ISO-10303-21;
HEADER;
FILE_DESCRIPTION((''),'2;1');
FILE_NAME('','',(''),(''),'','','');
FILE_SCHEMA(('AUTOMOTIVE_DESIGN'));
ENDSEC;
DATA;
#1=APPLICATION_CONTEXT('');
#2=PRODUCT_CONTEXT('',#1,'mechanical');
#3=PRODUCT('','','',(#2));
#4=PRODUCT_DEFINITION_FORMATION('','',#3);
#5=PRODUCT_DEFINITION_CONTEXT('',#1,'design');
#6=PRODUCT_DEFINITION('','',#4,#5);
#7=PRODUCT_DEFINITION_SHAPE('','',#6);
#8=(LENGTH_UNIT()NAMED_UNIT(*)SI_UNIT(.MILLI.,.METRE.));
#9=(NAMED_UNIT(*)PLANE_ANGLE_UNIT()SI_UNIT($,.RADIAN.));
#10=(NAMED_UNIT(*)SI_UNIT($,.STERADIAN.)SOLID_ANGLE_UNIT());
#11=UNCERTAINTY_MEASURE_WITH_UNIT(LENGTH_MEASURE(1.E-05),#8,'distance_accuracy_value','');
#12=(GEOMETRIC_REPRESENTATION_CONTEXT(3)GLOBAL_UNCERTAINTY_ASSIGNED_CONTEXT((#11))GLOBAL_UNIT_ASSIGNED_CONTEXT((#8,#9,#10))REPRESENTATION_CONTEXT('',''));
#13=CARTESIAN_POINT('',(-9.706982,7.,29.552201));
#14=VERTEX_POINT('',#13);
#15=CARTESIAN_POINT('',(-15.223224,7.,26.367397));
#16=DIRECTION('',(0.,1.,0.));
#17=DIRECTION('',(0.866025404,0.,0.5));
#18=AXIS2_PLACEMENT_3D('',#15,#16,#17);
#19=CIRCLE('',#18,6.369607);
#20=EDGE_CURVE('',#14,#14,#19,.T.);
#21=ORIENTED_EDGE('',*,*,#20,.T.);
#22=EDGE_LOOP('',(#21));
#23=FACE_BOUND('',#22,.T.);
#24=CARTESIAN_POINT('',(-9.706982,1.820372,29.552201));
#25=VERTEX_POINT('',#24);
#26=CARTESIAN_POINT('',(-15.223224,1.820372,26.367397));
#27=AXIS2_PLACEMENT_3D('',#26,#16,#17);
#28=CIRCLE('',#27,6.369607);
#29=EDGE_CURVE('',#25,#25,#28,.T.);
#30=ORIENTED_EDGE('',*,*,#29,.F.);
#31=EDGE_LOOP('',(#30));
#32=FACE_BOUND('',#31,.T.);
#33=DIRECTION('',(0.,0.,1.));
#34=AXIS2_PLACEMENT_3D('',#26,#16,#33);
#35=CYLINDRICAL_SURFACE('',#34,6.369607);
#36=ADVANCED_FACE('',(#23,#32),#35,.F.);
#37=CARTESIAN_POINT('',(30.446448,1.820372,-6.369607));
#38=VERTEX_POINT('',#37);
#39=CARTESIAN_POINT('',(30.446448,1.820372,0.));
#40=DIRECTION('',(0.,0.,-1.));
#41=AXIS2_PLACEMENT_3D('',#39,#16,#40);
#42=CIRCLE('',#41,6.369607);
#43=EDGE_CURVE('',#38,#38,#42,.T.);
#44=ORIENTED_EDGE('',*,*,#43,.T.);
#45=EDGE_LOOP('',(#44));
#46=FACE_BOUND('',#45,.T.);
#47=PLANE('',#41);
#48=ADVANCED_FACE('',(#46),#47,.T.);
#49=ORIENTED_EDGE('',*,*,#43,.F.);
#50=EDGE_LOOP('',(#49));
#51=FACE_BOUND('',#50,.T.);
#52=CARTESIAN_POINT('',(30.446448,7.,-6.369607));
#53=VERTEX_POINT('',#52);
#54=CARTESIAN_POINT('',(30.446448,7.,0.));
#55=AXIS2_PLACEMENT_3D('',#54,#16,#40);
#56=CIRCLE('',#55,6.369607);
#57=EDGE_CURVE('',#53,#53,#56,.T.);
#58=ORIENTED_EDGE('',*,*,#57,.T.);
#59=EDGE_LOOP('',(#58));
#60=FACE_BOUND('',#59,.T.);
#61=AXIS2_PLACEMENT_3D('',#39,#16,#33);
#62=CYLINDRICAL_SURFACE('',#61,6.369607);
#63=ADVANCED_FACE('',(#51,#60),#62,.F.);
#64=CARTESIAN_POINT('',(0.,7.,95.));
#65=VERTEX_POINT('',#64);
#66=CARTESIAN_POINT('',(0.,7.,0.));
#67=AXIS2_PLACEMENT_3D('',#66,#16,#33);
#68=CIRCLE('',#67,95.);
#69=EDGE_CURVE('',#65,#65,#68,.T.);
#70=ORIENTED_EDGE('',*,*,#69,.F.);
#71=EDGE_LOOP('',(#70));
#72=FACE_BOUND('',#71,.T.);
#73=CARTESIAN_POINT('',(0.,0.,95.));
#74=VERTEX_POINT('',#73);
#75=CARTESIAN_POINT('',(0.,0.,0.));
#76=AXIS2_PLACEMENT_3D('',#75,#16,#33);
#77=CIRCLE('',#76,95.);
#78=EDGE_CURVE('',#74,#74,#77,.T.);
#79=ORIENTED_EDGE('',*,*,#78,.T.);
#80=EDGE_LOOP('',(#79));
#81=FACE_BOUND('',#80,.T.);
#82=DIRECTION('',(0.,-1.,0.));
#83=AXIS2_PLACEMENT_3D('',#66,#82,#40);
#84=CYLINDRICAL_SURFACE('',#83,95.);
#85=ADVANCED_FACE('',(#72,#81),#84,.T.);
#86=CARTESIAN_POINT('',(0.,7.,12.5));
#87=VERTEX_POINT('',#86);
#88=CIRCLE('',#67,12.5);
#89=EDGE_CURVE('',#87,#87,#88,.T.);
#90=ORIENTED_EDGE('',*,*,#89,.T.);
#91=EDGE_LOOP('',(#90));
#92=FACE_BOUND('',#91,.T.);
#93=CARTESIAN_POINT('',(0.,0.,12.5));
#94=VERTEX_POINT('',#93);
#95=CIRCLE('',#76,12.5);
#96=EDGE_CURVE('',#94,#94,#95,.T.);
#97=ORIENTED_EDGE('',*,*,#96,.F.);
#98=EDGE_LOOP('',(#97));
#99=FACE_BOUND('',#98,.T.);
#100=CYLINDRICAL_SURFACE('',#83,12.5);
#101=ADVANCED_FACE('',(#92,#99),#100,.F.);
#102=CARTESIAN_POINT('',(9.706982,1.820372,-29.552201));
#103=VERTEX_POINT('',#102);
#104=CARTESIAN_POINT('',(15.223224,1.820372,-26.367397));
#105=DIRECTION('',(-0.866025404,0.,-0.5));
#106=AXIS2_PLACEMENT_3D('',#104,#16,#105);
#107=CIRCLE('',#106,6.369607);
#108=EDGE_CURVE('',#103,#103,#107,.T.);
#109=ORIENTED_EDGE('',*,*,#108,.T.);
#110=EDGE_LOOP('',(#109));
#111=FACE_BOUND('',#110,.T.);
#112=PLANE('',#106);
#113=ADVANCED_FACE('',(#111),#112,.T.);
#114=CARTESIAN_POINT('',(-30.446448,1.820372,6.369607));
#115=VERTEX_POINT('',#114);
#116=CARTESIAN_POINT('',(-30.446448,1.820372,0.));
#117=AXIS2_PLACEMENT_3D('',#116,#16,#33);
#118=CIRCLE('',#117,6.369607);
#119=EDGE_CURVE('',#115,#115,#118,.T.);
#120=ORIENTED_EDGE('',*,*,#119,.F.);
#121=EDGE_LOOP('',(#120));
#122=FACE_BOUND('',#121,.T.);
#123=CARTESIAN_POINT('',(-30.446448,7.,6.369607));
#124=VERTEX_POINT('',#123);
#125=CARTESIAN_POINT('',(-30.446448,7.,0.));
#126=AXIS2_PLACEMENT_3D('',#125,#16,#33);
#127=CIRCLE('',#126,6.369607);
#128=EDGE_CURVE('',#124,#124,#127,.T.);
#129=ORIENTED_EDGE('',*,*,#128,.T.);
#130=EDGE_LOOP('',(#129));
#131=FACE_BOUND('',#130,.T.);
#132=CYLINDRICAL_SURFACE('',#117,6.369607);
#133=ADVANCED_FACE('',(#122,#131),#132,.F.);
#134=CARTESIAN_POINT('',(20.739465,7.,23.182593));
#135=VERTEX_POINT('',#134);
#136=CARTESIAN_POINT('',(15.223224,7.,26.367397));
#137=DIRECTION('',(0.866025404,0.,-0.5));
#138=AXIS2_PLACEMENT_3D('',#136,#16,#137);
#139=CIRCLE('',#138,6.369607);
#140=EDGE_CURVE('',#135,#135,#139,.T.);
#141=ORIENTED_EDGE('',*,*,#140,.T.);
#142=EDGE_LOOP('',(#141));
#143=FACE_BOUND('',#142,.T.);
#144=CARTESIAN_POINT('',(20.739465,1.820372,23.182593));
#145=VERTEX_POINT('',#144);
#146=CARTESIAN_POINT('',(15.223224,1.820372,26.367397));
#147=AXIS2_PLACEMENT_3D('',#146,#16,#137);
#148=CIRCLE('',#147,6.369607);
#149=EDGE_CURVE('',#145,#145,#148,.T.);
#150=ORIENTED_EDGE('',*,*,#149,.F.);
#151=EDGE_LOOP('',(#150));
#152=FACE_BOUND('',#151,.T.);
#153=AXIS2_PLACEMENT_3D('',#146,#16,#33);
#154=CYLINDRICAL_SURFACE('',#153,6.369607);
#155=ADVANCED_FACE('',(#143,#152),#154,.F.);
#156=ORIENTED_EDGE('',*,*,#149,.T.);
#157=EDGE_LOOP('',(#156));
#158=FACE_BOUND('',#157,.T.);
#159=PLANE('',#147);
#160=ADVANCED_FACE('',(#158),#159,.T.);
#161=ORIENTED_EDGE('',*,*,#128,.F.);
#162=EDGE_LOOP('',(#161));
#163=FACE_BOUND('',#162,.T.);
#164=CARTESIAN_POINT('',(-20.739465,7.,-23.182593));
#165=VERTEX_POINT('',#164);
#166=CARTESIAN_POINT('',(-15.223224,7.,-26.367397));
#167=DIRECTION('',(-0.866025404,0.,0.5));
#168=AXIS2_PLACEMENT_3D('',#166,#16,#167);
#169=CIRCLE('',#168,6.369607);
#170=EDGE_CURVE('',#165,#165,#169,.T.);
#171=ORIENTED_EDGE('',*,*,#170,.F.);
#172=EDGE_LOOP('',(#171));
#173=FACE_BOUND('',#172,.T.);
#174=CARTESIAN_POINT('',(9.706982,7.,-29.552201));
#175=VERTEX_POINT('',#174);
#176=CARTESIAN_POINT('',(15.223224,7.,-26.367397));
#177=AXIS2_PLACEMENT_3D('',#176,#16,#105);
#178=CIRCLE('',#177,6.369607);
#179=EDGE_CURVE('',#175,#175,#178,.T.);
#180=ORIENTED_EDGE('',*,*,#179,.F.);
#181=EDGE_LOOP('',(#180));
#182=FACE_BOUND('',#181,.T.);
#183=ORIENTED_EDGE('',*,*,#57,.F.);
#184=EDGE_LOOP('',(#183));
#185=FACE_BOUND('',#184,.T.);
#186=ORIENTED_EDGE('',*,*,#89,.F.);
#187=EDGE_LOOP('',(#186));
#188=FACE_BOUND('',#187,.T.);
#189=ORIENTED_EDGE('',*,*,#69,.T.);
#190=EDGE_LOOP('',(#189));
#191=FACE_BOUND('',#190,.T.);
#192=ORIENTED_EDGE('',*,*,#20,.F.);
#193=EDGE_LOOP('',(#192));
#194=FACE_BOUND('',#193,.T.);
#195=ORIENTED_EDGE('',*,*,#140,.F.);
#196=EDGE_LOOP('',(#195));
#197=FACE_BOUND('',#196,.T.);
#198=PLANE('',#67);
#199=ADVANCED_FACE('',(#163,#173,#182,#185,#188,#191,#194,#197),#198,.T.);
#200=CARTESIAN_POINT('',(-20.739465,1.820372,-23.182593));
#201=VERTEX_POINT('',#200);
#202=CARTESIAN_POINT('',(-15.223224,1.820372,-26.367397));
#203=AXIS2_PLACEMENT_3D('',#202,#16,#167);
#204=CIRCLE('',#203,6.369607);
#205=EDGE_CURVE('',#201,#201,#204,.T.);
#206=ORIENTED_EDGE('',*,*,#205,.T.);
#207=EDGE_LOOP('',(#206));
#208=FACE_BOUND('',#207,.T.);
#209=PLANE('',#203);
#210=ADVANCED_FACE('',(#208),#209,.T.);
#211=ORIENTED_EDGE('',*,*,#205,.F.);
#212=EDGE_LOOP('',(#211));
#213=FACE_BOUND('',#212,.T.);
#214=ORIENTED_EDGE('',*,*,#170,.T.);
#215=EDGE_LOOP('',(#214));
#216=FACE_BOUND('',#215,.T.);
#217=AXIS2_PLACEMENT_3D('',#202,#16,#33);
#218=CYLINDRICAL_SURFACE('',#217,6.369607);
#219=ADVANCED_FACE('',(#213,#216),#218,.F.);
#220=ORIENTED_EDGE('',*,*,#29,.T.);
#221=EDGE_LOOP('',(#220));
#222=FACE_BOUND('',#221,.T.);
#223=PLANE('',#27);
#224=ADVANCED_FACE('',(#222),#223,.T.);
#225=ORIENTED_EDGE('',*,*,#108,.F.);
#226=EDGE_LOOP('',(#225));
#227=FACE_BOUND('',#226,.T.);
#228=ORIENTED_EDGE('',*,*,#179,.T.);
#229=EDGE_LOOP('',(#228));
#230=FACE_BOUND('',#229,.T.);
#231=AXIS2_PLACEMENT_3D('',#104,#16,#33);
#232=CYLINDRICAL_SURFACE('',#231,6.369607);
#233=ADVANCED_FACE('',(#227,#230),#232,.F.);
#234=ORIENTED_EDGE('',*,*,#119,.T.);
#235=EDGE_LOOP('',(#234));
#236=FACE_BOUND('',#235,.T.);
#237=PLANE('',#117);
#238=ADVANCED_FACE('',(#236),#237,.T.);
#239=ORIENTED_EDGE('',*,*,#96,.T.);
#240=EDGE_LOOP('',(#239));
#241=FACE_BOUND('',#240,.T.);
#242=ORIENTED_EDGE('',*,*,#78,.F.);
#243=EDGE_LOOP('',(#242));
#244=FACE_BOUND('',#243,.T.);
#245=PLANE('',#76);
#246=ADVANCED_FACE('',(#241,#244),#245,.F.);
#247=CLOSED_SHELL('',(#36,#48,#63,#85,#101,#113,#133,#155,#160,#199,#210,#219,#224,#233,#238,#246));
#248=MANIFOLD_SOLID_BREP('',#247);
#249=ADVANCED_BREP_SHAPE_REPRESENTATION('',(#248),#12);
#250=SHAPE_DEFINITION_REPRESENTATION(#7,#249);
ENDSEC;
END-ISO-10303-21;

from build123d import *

# Parameters (mm, degrees)
SKETCH1_R           = 95
BOSS_EXTRUDE1_DEPTH = 7
SKETCH2_R           = 12.5
CUT_EXTRUDE1_DEPTH  = 135.532523949
SKETCH3_R           = 6.369607195
CUT_EXTRUDE2_DEPTH  = 5.179627619
CIRPATTERN1_COUNT   = 6


with BuildPart() as part:
    # Sketch1 → Boss-Extrude1 (new body)
    with BuildSketch(Plane(origin=(0, 0, 0), x_dir=(1, 0, 0), z_dir=(0, 1, 0))):
        Circle(SKETCH1_R)
    extrude(amount=BOSS_EXTRUDE1_DEPTH)

    # Sketch2 → Cut-Extrude1 (cut, through all)
    with BuildSketch(Plane(origin=(0, 0, 0), x_dir=(1, 0, 0), z_dir=(0, 1, 0))):
        Circle(SKETCH2_R)
    extrude(amount=CUT_EXTRUDE1_DEPTH, mode=Mode.SUBTRACT)

    # Sketch3 → Cut-Extrude2 (cut)
    with BuildSketch(Plane(origin=(0, 7, 0), x_dir=(1, 0, 0), z_dir=(0, 1, 0))):
        with Locations((-30.446447507, 0)):
            Circle(SKETCH3_R)
    cut_extrude2 = extrude(amount=-CUT_EXTRUDE2_DEPTH, mode=Mode.SUBTRACT)

    # CirPattern1: Cut-Extrude2 ×6 about axis
    cirpattern1_axis = Axis((0, 0, 0), (0, 1, 0))
    for i in range(1, CIRPATTERN1_COUNT):
        add(cut_extrude2.rotate(cirpattern1_axis, i * 360 / CIRPATTERN1_COUNT), mode=Mode.SUBTRACT)


solid = part.part
